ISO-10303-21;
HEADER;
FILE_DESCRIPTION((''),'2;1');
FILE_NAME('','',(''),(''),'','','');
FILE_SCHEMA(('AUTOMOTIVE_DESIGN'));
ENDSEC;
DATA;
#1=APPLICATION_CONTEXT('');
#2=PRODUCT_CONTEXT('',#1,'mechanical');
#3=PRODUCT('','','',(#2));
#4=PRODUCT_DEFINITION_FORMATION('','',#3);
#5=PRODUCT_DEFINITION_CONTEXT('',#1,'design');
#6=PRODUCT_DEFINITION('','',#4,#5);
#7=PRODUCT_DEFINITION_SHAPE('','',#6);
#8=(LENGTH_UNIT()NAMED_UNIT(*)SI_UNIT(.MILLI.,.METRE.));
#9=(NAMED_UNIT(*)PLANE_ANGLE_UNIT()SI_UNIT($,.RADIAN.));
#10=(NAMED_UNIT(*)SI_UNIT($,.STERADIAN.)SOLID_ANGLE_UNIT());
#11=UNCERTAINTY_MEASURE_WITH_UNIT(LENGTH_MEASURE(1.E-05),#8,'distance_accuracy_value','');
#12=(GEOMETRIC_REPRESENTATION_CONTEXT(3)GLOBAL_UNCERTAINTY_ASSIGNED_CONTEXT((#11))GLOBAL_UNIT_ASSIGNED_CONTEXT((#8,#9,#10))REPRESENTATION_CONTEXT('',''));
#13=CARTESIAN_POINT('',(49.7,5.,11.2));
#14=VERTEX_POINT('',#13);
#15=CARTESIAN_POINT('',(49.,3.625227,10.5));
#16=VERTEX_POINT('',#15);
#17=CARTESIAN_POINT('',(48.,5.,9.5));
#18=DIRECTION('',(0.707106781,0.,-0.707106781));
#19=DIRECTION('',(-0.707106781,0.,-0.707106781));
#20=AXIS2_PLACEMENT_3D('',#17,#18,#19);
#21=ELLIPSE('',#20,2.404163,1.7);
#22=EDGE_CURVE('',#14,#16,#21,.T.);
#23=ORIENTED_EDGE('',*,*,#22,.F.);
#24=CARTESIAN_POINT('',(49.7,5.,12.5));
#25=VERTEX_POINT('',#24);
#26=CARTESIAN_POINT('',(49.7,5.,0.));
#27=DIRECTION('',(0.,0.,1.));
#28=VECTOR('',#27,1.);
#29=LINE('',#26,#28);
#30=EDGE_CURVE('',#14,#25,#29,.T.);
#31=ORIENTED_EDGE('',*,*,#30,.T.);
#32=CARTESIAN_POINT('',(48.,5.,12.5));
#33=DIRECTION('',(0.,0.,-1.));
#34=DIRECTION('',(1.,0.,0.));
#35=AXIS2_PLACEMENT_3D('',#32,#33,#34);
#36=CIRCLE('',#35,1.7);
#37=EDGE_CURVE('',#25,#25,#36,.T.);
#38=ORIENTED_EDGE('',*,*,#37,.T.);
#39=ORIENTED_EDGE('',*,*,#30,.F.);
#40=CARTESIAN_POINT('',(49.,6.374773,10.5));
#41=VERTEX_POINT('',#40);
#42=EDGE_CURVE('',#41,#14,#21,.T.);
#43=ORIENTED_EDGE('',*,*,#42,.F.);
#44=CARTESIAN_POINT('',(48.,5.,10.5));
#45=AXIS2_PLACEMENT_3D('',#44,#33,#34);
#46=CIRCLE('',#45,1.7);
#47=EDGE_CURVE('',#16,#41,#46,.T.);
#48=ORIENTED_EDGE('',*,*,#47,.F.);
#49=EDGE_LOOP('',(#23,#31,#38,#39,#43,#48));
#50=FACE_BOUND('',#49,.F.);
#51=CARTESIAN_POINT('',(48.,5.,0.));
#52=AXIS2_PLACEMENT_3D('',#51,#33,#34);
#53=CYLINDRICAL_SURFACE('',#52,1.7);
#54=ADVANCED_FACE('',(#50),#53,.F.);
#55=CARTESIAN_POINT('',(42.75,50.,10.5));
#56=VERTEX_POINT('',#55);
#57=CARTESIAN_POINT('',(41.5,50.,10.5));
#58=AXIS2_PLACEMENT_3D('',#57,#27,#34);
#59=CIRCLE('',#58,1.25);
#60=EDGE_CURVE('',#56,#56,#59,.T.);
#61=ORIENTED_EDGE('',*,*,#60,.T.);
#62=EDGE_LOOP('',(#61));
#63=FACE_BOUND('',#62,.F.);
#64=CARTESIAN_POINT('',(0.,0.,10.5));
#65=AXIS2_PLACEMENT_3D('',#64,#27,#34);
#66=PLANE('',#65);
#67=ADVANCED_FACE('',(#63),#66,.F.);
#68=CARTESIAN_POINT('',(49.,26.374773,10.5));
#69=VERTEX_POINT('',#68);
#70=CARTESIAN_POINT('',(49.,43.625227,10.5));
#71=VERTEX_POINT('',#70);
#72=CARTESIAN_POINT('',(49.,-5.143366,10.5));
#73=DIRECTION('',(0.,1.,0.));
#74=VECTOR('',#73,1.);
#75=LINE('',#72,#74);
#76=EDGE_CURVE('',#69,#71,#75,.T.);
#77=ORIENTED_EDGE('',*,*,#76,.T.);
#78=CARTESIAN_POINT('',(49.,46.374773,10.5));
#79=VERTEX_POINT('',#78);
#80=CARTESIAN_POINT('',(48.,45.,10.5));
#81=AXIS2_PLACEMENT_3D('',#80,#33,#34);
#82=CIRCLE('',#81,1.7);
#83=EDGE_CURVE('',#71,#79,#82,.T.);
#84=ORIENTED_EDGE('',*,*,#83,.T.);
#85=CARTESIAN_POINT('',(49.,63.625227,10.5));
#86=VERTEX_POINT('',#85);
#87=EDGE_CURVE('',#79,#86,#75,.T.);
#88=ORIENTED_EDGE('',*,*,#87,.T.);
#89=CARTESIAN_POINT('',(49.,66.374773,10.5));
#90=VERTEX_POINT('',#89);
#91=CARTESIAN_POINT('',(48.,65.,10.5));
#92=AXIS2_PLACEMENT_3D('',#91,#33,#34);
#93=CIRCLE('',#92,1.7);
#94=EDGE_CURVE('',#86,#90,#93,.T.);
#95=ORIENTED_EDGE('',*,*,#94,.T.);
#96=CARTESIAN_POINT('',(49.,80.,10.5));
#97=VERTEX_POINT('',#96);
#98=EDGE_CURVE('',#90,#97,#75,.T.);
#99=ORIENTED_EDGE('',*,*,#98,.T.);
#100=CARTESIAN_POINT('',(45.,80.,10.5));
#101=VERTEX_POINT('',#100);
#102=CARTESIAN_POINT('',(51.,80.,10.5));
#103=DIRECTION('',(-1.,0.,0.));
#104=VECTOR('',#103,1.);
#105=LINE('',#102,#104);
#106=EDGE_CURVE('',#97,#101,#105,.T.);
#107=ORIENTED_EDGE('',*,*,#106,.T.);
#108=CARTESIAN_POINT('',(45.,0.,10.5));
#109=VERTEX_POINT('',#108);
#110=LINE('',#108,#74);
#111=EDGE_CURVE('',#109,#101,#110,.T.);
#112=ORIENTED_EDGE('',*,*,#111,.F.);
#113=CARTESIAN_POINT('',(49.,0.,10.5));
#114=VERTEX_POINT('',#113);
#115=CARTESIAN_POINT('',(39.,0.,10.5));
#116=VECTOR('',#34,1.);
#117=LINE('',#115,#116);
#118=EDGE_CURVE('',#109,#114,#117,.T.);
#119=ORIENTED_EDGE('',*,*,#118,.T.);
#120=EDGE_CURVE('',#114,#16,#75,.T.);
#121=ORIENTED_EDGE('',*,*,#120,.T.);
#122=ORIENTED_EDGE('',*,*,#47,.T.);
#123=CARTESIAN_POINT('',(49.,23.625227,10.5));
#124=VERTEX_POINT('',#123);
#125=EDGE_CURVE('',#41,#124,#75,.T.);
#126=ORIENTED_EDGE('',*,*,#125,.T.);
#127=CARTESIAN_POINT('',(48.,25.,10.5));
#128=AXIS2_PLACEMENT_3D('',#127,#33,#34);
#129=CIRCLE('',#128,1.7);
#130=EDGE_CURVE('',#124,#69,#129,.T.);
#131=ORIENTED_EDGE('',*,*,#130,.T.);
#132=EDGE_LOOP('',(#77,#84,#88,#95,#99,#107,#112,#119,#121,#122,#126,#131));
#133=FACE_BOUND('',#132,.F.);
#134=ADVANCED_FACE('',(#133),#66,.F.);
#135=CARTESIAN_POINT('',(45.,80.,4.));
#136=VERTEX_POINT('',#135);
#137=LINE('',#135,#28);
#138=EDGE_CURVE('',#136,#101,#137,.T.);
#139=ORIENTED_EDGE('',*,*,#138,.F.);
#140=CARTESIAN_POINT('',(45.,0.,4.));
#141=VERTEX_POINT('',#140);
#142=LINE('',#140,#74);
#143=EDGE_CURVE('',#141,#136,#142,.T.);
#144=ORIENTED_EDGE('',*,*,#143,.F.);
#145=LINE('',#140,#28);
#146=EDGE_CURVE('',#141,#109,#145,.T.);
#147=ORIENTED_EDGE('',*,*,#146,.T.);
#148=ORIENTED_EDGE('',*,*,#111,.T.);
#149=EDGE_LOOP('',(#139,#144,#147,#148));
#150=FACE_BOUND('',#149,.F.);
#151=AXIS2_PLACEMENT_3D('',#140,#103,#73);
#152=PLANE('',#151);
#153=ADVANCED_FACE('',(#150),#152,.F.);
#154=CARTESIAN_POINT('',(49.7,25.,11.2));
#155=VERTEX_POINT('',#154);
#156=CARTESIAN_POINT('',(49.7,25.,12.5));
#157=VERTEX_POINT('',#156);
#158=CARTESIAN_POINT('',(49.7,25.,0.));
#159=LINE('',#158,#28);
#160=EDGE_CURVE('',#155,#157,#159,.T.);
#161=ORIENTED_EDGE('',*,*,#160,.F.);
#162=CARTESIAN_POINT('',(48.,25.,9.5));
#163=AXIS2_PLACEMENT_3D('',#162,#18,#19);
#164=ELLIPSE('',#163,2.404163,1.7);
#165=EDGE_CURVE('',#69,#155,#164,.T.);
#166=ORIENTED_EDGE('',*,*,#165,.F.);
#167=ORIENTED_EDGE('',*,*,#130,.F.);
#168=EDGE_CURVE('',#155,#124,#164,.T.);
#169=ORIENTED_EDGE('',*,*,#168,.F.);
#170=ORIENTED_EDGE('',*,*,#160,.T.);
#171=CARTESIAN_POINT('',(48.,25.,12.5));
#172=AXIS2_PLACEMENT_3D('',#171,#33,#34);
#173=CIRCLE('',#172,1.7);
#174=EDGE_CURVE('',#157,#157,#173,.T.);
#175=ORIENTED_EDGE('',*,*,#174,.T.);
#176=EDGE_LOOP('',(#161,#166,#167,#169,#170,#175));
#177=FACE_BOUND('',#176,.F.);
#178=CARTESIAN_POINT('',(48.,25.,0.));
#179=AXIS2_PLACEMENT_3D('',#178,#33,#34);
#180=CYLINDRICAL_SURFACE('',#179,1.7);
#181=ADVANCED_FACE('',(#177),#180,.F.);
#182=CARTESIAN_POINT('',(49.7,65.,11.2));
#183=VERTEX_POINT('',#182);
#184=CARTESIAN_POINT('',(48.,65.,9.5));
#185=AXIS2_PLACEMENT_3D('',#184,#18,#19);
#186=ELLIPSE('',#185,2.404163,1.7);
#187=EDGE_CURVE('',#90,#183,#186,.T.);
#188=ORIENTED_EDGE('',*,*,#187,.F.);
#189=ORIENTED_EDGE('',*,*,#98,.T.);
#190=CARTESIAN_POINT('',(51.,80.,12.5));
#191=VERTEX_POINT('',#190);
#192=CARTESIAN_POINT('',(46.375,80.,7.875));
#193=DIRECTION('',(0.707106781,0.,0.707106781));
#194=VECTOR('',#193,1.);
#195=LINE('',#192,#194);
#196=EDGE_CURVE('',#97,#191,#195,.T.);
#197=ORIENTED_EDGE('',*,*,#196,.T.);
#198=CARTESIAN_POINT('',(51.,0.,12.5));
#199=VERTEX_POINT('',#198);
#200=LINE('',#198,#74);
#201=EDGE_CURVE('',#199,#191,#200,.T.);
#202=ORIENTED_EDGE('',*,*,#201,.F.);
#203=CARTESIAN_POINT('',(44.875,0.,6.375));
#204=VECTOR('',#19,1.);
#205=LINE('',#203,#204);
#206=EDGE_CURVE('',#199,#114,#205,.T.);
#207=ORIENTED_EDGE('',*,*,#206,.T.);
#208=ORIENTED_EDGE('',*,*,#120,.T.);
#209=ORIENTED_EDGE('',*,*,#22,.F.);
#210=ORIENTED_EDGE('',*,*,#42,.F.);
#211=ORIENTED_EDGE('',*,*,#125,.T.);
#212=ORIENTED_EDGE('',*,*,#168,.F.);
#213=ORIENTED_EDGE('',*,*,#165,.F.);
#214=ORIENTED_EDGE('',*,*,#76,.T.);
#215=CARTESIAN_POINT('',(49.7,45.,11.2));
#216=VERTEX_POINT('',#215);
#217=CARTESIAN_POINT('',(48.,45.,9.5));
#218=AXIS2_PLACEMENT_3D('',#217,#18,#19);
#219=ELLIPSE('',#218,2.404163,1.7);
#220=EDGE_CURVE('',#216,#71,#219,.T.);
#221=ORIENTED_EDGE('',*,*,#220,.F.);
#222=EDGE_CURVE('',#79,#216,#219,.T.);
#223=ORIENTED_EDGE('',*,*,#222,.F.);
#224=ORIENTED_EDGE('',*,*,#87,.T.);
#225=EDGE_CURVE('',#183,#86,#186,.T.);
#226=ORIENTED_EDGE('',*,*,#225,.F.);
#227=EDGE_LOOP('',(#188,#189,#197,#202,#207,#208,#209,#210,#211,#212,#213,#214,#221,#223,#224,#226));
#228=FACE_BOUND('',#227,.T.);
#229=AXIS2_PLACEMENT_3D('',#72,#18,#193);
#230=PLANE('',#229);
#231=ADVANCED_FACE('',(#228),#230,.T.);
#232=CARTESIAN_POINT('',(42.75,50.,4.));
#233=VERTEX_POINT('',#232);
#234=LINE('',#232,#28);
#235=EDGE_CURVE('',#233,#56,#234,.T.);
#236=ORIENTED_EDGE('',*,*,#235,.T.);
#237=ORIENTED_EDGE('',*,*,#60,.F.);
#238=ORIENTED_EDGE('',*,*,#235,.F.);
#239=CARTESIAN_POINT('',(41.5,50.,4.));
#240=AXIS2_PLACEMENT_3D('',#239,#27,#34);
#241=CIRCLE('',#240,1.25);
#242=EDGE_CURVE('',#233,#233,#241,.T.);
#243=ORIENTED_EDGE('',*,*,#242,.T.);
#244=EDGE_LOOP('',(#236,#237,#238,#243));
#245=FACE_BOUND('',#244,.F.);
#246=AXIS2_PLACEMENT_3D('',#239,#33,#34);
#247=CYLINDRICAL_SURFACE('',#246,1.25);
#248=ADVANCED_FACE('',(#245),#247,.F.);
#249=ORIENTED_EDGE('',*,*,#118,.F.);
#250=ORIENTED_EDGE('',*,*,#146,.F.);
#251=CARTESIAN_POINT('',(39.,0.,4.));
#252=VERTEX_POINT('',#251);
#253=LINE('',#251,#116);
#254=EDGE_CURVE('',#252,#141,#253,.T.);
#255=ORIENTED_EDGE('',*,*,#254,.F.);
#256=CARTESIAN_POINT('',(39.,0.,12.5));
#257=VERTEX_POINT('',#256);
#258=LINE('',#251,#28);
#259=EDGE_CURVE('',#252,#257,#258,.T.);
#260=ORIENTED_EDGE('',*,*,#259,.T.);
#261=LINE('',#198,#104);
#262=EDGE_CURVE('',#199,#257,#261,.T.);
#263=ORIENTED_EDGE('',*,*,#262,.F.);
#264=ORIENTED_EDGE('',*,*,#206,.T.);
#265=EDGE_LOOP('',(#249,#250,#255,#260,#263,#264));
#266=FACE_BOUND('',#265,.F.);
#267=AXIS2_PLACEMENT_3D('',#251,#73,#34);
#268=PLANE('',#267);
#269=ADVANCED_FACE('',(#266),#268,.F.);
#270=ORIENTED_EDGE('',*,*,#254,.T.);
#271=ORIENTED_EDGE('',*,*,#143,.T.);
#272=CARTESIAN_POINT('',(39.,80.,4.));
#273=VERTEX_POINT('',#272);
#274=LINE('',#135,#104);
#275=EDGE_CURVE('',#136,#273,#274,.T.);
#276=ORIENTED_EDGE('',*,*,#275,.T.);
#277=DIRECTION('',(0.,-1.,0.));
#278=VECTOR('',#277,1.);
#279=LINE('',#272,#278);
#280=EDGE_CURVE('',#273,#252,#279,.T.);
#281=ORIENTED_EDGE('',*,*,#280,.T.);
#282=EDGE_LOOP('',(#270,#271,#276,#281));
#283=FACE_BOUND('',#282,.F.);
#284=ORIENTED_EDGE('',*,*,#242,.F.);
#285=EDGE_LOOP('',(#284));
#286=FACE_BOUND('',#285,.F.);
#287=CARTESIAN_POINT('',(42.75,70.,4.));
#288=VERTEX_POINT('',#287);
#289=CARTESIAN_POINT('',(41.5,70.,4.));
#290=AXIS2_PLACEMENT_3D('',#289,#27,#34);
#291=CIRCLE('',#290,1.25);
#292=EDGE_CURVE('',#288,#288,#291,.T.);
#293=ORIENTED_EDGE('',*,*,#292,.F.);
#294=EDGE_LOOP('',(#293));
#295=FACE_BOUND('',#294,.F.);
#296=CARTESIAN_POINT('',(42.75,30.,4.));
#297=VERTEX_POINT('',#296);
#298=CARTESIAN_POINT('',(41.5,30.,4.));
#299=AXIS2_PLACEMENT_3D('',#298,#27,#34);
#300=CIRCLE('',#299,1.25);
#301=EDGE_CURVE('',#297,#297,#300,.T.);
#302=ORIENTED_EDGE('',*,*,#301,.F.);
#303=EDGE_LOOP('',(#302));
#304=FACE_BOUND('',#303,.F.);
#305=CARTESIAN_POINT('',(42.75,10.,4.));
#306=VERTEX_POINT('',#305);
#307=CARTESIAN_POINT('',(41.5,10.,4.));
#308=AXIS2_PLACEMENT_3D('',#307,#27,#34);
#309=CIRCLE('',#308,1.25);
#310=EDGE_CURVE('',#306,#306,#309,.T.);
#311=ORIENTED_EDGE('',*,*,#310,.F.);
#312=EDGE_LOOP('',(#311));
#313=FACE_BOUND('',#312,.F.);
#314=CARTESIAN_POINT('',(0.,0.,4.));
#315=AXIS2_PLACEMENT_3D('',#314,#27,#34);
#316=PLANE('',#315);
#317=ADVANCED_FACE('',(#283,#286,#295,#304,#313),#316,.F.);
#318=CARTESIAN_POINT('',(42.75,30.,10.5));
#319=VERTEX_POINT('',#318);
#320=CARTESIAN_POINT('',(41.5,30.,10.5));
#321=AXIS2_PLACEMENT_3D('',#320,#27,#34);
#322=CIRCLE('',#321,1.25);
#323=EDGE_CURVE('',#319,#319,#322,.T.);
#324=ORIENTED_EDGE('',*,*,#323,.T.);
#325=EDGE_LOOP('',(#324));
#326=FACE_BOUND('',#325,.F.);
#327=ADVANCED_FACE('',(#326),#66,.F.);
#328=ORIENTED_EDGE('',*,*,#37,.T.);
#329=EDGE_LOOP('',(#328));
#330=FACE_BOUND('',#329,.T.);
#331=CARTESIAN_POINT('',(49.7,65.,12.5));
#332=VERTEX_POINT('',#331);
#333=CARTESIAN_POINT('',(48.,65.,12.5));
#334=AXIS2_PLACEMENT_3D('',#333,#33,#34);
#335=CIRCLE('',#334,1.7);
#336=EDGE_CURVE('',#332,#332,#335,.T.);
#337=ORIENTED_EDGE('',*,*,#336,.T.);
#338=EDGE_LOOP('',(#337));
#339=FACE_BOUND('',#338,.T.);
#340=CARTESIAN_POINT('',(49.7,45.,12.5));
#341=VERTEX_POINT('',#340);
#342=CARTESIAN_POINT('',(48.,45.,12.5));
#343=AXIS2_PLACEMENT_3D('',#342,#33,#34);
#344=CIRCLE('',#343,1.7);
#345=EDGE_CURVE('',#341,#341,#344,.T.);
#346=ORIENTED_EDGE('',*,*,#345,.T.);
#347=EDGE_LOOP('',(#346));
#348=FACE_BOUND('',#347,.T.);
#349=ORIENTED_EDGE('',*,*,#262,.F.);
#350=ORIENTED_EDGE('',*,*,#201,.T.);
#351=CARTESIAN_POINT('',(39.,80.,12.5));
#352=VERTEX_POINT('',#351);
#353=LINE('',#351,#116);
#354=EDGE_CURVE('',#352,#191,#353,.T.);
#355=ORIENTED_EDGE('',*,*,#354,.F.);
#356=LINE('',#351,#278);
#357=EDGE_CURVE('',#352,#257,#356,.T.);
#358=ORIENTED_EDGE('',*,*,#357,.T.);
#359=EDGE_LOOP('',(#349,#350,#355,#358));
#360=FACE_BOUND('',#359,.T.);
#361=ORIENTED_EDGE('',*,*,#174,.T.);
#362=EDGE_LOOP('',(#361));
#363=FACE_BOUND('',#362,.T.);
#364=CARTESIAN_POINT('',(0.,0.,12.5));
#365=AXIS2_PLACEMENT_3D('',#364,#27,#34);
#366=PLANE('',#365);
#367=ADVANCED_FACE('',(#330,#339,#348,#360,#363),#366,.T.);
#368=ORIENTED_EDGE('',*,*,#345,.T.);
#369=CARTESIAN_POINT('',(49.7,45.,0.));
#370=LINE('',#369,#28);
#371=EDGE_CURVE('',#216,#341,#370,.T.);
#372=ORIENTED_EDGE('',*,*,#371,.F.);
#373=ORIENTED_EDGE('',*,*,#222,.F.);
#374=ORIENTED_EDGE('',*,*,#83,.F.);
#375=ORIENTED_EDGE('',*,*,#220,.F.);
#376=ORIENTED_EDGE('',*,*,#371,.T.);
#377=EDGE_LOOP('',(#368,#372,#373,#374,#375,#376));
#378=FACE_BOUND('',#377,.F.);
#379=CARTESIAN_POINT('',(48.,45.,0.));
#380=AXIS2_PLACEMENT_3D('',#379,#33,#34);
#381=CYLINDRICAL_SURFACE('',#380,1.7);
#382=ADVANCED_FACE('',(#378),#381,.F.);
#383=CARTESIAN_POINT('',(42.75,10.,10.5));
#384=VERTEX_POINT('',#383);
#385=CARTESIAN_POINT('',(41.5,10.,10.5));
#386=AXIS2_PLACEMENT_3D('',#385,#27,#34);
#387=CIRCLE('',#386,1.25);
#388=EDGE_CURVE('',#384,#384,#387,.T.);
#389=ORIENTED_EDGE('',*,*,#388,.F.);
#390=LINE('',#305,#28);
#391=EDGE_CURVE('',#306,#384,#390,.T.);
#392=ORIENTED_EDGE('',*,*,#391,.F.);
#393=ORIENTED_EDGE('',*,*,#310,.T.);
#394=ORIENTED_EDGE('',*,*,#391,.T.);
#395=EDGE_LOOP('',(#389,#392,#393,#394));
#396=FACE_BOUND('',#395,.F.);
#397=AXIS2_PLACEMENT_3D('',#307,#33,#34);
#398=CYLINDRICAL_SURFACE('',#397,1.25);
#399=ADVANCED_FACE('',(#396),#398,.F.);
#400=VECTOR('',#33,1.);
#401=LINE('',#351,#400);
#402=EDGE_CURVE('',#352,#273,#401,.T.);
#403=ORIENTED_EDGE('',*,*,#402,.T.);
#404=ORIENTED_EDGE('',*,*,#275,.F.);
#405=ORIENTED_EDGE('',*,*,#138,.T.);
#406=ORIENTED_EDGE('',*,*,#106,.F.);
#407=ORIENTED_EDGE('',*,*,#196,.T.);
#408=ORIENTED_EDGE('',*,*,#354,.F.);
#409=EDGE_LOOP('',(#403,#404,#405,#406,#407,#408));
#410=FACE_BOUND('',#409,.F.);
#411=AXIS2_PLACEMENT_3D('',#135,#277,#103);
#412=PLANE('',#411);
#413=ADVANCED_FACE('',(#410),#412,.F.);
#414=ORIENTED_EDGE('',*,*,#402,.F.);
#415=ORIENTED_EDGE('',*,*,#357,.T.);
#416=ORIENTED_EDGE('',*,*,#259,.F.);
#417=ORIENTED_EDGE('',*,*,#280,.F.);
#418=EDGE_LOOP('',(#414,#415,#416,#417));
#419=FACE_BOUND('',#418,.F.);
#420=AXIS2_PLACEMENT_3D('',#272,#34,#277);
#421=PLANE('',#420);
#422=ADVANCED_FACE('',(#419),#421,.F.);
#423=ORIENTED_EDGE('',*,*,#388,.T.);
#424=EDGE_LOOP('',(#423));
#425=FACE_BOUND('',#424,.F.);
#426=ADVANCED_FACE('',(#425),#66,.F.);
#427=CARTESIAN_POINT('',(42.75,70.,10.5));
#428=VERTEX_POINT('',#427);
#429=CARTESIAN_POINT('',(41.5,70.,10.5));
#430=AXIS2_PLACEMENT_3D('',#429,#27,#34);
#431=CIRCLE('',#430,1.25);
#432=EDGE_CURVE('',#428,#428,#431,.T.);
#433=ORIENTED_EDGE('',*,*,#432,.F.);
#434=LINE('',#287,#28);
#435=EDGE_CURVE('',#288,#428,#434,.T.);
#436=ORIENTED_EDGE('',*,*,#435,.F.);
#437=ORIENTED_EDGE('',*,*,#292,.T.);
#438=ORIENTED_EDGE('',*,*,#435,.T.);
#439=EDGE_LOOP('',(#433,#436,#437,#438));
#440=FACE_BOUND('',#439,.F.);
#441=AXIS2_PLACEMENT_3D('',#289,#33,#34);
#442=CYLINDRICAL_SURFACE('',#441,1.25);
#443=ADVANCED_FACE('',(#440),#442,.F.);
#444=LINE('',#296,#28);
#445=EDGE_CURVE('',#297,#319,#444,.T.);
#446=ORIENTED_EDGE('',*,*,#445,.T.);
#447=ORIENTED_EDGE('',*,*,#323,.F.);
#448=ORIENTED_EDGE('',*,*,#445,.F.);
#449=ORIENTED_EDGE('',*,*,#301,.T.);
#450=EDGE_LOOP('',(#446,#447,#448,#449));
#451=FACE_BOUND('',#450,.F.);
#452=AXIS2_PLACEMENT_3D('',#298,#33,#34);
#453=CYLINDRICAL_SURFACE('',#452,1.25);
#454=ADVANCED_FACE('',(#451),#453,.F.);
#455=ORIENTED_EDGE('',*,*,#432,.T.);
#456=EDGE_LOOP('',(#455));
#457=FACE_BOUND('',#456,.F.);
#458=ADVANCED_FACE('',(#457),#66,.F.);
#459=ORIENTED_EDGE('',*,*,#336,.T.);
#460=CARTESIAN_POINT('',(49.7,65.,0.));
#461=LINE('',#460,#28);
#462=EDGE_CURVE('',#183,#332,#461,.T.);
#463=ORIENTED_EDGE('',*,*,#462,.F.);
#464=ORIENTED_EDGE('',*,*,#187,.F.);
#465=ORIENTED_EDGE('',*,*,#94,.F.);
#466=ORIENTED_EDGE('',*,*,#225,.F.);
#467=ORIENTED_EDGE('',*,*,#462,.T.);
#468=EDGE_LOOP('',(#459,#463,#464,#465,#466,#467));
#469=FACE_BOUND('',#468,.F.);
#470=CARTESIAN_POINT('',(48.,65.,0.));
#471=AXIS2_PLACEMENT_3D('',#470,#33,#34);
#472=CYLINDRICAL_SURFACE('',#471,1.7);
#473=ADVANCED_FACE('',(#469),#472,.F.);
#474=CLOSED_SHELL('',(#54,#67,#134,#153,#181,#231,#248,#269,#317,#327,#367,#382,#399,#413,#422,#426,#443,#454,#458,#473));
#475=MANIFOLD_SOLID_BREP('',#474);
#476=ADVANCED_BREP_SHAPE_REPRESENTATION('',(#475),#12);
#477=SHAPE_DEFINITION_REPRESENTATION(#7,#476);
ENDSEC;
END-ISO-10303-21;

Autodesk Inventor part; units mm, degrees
ref_plane "Right_Connecting_Web_StartPlane" through (0, 0, 4) normal (0, 0, 1) x (1, 0, 0)
sketch "Right_Connecting_Web_Profile" plane through (0, 0, 4) normal (0, 0, 1) x (1, 0, 0)
  line L0 (39, 0) -> (45, 0)
  line L1 (45, 0) -> (45, 80)
  line L2 (45, 80) -> (39, 80)
  line L3 (39, 80) -> (39, 0)
  point P0 (0, 0)
  dimension "d1" = 39
  dimension "d2" = 6
  dimension "d3" = 80
extrude "Right_Connecting_Web" add sketch "Right_Connecting_Web_Profile" along normal blind 8.5
ref_plane "Right_Rod_Contact_Flange_StartPlane" through (0, 0, 10.5) normal (0, 0, 1) x (1, 0, 0)
sketch "Right_Rod_Contact_Flange_Profile" plane through (0, 0, 10.5) normal (0, 0, 1) x (1, 0, 0)
  line L0 (39, 0) -> (51, 0)
  line L1 (51, 0) -> (51, 80)
  line L2 (51, 80) -> (39, 80)
  line L3 (39, 80) -> (39, 0)
  point P0 (0, 0)
  dimension "d7" = 39
  dimension "d8" = 12
  dimension "d9" = 80
extrude "Right_Rod_Contact_Flange" add sketch "Right_Rod_Contact_Flange_Profile" along normal blind 2
sketch "Original_Rod_Clearance_4x_Locations" plane through (0, 0, 0) normal (0, 0, 1) x (1, 0, 0)
  circle A0 centre (48, 5) radius 1.7
  circle A1 centre (48, 25) radius 1.7
  circle A2 centre (48, 45) radius 1.7
  circle A3 centre (48, 65) radius 1.7
  point P0 (0, 0)
  dimension "d12" = 48
  dimension "d13" = 5
  dimension "d14" = 3.4
  dimension "d15" = 48
  dimension "d16" = 25
  dimension "d17" = 3.4
  dimension "d18" = 48
  dimension "d19" = 45
  dimension "d20" = 3.4
  dimension "d21" = 48
  dimension "d22" = 65
  dimension "d23" = 3.4
extrude "Original_Rod_Clearance_4x" cut sketch "Original_Rod_Clearance_4x_Locations" along normal through all
ref_plane "Work Plane3" through (0, 0, 4) normal (0, 0, 1) x (1, 0, 0)
sketch "Deck_Assembly_M3_Locations" plane through (0, 0, 4) normal (0, 0, 1) x (1, 0, 0)
  circle A0 centre (41.5, 10) radius 1.25
  circle A1 centre (41.5, 30) radius 1.25
  circle A2 centre (41.5, 50) radius 1.25
  circle A3 centre (41.5, 70) radius 1.25
  point P0 (0, 0)
  dimension "d27" = 41.5
  dimension "d28" = 10
  dimension "d29" = 2.5
  dimension "d30" = 41.5
  dimension "d31" = 30
  dimension "d32" = 2.5
  dimension "d33" = 41.5
  dimension "d34" = 50
  dimension "d35" = 2.5
  dimension "d36" = 41.5
  dimension "d37" = 70
  dimension "d38" = 2.5
extrude "Four_Blind_M3_Tap_Bores" cut sketch "Deck_Assembly_M3_Locations" along normal blind 6.5
thread "Deck_M3x0_5_6H_1" size "M3x0.5" class "6H" standard "ISO Metric profile" length 6.5
thread "Deck_M3x0_5_6H_2" size "M3x0.5" class "6H" standard "ISO Metric profile" length 6.5
thread "Deck_M3x0_5_6H_3" size "M3x0.5" class "6H" standard "ISO Metric profile" length 6.5
thread "Deck_M3x0_5_6H_4" size "M3x0.5" class "6H" standard "ISO Metric profile" length 6.5
chamfer "Outer_End_2mm_45deg" distance 2 angle 45 1 edges at (51, 40, 10.5)
equation "\"d1\" = -RodWidth + OverallWidth - WebThickness"
equation "\"d2\" = WebThickness"
equation "\"d3\" = ContactLength"
equation "\"d4\" = DropHeight"
equation "\"d7\" = -RodWidth + OverallWidth - WebThickness"
equation "\"d8\" = RodWidth + WebThickness"
equation "\"d9\" = ContactLength"
equation "\"d10\" = RodFlangeThickness"
equation "\"d12\" = OverallWidth - 0.5 * RodWidth"
equation "\"d13\" = RodHoleStart + 0 * RodScrewPitch"
equation "\"d14\" = RodClearanceDiameter"
equation "\"d15\" = OverallWidth - 0.5 * RodWidth"
equation "\"d16\" = RodHoleStart + RodScrewPitch"
equation "\"d17\" = RodClearanceDiameter"
equation "\"d18\" = OverallWidth - 0.5 * RodWidth"
equation "\"d19\" = RodHoleStart + 2 * RodScrewPitch"
equation "\"d20\" = RodClearanceDiameter"
equation "\"d21\" = OverallWidth - 0.5 * RodWidth"
equation "\"d22\" = RodHoleStart + 3 * RodScrewPitch"
equation "\"d23\" = RodClearanceDiameter"
equation "\"d27\" = OverallWidth - JoinLeftX"
equation "\"d28\" = JoinFirstY + 0 * JoinPitch"
equation "\"d29\" = TapDrillDiameter"
equation "\"d30\" = OverallWidth - JoinLeftX"
equation "\"d31\" = JoinFirstY + JoinPitch"
equation "\"d32\" = TapDrillDiameter"
equation "\"d33\" = OverallWidth - JoinLeftX"
equation "\"d34\" = JoinFirstY + 2 * JoinPitch"
equation "\"d35\" = TapDrillDiameter"
equation "\"d36\" = OverallWidth - JoinLeftX"
equation "\"d37\" = JoinFirstY + 3 * JoinPitch"
equation "\"d38\" = TapDrillDiameter"
equation "\"d39\" = JoinThreadDepth"
equation "\"d41\" = JoinThreadDepth"
equation "\"d43\" = JoinThreadDepth"
equation "\"d45\" = JoinThreadDepth"
equation "\"d47\" = JoinThreadDepth"
equation "\"d49\" = OuterEndChamfer"
equation "\"d50\" = OuterEndChamfer"
equation "\"OverallWidth\" = 51"
equation "\"RodWidth\" = 6"
equation "\"ContactLength\" = 80"
equation "\"BaseThickness\" = 4"
equation "\"DropHeight\" = 8.5"
equation "\"WebThickness\" = 6"
equation "\"FingerStartX\" = 19.93338"
equation "\"FingerWidth\" = 13.5"
equation "\"FingerThickness\" = 6"
equation "\"FingerEndInset\" = 4"
equation "\"RodClearanceDiameter\" = 3.4"
equation "\"ClampFirstY\" = 41.82802"
equation "\"ClampPitch\" = 16"
equation "\"ClampHeight\" = BaseThickness + 0.5 * FingerThickness"
equation "\"TapDrillDiameter\" = 2.5"
equation "\"TapDepth\" = 6"
equation "\"RodHoleStart\" = 5"
equation "\"RodScrewPitch\" = 20"
equation "\"JoinLeftX\" = 9.5"
equation "\"JoinFirstY\" = 10"
equation "\"JoinPitch\" = 20"
equation "\"JoinThreadDepth\" = 6.5"
equation "\"JoinCountersinkDiameter\" = 6.2"
equation "\"d0\" = BaseThickness"
equation "\"d6\" = BaseThickness + DropHeight - RodFlangeThickness"
equation "\"d26\" = BaseThickness"
equation "\"RodFlangeThickness\" = 2"
equation "\"OuterEndChamfer\" = RodFlangeThickness"
properties part number "Right_Rod_Support"
